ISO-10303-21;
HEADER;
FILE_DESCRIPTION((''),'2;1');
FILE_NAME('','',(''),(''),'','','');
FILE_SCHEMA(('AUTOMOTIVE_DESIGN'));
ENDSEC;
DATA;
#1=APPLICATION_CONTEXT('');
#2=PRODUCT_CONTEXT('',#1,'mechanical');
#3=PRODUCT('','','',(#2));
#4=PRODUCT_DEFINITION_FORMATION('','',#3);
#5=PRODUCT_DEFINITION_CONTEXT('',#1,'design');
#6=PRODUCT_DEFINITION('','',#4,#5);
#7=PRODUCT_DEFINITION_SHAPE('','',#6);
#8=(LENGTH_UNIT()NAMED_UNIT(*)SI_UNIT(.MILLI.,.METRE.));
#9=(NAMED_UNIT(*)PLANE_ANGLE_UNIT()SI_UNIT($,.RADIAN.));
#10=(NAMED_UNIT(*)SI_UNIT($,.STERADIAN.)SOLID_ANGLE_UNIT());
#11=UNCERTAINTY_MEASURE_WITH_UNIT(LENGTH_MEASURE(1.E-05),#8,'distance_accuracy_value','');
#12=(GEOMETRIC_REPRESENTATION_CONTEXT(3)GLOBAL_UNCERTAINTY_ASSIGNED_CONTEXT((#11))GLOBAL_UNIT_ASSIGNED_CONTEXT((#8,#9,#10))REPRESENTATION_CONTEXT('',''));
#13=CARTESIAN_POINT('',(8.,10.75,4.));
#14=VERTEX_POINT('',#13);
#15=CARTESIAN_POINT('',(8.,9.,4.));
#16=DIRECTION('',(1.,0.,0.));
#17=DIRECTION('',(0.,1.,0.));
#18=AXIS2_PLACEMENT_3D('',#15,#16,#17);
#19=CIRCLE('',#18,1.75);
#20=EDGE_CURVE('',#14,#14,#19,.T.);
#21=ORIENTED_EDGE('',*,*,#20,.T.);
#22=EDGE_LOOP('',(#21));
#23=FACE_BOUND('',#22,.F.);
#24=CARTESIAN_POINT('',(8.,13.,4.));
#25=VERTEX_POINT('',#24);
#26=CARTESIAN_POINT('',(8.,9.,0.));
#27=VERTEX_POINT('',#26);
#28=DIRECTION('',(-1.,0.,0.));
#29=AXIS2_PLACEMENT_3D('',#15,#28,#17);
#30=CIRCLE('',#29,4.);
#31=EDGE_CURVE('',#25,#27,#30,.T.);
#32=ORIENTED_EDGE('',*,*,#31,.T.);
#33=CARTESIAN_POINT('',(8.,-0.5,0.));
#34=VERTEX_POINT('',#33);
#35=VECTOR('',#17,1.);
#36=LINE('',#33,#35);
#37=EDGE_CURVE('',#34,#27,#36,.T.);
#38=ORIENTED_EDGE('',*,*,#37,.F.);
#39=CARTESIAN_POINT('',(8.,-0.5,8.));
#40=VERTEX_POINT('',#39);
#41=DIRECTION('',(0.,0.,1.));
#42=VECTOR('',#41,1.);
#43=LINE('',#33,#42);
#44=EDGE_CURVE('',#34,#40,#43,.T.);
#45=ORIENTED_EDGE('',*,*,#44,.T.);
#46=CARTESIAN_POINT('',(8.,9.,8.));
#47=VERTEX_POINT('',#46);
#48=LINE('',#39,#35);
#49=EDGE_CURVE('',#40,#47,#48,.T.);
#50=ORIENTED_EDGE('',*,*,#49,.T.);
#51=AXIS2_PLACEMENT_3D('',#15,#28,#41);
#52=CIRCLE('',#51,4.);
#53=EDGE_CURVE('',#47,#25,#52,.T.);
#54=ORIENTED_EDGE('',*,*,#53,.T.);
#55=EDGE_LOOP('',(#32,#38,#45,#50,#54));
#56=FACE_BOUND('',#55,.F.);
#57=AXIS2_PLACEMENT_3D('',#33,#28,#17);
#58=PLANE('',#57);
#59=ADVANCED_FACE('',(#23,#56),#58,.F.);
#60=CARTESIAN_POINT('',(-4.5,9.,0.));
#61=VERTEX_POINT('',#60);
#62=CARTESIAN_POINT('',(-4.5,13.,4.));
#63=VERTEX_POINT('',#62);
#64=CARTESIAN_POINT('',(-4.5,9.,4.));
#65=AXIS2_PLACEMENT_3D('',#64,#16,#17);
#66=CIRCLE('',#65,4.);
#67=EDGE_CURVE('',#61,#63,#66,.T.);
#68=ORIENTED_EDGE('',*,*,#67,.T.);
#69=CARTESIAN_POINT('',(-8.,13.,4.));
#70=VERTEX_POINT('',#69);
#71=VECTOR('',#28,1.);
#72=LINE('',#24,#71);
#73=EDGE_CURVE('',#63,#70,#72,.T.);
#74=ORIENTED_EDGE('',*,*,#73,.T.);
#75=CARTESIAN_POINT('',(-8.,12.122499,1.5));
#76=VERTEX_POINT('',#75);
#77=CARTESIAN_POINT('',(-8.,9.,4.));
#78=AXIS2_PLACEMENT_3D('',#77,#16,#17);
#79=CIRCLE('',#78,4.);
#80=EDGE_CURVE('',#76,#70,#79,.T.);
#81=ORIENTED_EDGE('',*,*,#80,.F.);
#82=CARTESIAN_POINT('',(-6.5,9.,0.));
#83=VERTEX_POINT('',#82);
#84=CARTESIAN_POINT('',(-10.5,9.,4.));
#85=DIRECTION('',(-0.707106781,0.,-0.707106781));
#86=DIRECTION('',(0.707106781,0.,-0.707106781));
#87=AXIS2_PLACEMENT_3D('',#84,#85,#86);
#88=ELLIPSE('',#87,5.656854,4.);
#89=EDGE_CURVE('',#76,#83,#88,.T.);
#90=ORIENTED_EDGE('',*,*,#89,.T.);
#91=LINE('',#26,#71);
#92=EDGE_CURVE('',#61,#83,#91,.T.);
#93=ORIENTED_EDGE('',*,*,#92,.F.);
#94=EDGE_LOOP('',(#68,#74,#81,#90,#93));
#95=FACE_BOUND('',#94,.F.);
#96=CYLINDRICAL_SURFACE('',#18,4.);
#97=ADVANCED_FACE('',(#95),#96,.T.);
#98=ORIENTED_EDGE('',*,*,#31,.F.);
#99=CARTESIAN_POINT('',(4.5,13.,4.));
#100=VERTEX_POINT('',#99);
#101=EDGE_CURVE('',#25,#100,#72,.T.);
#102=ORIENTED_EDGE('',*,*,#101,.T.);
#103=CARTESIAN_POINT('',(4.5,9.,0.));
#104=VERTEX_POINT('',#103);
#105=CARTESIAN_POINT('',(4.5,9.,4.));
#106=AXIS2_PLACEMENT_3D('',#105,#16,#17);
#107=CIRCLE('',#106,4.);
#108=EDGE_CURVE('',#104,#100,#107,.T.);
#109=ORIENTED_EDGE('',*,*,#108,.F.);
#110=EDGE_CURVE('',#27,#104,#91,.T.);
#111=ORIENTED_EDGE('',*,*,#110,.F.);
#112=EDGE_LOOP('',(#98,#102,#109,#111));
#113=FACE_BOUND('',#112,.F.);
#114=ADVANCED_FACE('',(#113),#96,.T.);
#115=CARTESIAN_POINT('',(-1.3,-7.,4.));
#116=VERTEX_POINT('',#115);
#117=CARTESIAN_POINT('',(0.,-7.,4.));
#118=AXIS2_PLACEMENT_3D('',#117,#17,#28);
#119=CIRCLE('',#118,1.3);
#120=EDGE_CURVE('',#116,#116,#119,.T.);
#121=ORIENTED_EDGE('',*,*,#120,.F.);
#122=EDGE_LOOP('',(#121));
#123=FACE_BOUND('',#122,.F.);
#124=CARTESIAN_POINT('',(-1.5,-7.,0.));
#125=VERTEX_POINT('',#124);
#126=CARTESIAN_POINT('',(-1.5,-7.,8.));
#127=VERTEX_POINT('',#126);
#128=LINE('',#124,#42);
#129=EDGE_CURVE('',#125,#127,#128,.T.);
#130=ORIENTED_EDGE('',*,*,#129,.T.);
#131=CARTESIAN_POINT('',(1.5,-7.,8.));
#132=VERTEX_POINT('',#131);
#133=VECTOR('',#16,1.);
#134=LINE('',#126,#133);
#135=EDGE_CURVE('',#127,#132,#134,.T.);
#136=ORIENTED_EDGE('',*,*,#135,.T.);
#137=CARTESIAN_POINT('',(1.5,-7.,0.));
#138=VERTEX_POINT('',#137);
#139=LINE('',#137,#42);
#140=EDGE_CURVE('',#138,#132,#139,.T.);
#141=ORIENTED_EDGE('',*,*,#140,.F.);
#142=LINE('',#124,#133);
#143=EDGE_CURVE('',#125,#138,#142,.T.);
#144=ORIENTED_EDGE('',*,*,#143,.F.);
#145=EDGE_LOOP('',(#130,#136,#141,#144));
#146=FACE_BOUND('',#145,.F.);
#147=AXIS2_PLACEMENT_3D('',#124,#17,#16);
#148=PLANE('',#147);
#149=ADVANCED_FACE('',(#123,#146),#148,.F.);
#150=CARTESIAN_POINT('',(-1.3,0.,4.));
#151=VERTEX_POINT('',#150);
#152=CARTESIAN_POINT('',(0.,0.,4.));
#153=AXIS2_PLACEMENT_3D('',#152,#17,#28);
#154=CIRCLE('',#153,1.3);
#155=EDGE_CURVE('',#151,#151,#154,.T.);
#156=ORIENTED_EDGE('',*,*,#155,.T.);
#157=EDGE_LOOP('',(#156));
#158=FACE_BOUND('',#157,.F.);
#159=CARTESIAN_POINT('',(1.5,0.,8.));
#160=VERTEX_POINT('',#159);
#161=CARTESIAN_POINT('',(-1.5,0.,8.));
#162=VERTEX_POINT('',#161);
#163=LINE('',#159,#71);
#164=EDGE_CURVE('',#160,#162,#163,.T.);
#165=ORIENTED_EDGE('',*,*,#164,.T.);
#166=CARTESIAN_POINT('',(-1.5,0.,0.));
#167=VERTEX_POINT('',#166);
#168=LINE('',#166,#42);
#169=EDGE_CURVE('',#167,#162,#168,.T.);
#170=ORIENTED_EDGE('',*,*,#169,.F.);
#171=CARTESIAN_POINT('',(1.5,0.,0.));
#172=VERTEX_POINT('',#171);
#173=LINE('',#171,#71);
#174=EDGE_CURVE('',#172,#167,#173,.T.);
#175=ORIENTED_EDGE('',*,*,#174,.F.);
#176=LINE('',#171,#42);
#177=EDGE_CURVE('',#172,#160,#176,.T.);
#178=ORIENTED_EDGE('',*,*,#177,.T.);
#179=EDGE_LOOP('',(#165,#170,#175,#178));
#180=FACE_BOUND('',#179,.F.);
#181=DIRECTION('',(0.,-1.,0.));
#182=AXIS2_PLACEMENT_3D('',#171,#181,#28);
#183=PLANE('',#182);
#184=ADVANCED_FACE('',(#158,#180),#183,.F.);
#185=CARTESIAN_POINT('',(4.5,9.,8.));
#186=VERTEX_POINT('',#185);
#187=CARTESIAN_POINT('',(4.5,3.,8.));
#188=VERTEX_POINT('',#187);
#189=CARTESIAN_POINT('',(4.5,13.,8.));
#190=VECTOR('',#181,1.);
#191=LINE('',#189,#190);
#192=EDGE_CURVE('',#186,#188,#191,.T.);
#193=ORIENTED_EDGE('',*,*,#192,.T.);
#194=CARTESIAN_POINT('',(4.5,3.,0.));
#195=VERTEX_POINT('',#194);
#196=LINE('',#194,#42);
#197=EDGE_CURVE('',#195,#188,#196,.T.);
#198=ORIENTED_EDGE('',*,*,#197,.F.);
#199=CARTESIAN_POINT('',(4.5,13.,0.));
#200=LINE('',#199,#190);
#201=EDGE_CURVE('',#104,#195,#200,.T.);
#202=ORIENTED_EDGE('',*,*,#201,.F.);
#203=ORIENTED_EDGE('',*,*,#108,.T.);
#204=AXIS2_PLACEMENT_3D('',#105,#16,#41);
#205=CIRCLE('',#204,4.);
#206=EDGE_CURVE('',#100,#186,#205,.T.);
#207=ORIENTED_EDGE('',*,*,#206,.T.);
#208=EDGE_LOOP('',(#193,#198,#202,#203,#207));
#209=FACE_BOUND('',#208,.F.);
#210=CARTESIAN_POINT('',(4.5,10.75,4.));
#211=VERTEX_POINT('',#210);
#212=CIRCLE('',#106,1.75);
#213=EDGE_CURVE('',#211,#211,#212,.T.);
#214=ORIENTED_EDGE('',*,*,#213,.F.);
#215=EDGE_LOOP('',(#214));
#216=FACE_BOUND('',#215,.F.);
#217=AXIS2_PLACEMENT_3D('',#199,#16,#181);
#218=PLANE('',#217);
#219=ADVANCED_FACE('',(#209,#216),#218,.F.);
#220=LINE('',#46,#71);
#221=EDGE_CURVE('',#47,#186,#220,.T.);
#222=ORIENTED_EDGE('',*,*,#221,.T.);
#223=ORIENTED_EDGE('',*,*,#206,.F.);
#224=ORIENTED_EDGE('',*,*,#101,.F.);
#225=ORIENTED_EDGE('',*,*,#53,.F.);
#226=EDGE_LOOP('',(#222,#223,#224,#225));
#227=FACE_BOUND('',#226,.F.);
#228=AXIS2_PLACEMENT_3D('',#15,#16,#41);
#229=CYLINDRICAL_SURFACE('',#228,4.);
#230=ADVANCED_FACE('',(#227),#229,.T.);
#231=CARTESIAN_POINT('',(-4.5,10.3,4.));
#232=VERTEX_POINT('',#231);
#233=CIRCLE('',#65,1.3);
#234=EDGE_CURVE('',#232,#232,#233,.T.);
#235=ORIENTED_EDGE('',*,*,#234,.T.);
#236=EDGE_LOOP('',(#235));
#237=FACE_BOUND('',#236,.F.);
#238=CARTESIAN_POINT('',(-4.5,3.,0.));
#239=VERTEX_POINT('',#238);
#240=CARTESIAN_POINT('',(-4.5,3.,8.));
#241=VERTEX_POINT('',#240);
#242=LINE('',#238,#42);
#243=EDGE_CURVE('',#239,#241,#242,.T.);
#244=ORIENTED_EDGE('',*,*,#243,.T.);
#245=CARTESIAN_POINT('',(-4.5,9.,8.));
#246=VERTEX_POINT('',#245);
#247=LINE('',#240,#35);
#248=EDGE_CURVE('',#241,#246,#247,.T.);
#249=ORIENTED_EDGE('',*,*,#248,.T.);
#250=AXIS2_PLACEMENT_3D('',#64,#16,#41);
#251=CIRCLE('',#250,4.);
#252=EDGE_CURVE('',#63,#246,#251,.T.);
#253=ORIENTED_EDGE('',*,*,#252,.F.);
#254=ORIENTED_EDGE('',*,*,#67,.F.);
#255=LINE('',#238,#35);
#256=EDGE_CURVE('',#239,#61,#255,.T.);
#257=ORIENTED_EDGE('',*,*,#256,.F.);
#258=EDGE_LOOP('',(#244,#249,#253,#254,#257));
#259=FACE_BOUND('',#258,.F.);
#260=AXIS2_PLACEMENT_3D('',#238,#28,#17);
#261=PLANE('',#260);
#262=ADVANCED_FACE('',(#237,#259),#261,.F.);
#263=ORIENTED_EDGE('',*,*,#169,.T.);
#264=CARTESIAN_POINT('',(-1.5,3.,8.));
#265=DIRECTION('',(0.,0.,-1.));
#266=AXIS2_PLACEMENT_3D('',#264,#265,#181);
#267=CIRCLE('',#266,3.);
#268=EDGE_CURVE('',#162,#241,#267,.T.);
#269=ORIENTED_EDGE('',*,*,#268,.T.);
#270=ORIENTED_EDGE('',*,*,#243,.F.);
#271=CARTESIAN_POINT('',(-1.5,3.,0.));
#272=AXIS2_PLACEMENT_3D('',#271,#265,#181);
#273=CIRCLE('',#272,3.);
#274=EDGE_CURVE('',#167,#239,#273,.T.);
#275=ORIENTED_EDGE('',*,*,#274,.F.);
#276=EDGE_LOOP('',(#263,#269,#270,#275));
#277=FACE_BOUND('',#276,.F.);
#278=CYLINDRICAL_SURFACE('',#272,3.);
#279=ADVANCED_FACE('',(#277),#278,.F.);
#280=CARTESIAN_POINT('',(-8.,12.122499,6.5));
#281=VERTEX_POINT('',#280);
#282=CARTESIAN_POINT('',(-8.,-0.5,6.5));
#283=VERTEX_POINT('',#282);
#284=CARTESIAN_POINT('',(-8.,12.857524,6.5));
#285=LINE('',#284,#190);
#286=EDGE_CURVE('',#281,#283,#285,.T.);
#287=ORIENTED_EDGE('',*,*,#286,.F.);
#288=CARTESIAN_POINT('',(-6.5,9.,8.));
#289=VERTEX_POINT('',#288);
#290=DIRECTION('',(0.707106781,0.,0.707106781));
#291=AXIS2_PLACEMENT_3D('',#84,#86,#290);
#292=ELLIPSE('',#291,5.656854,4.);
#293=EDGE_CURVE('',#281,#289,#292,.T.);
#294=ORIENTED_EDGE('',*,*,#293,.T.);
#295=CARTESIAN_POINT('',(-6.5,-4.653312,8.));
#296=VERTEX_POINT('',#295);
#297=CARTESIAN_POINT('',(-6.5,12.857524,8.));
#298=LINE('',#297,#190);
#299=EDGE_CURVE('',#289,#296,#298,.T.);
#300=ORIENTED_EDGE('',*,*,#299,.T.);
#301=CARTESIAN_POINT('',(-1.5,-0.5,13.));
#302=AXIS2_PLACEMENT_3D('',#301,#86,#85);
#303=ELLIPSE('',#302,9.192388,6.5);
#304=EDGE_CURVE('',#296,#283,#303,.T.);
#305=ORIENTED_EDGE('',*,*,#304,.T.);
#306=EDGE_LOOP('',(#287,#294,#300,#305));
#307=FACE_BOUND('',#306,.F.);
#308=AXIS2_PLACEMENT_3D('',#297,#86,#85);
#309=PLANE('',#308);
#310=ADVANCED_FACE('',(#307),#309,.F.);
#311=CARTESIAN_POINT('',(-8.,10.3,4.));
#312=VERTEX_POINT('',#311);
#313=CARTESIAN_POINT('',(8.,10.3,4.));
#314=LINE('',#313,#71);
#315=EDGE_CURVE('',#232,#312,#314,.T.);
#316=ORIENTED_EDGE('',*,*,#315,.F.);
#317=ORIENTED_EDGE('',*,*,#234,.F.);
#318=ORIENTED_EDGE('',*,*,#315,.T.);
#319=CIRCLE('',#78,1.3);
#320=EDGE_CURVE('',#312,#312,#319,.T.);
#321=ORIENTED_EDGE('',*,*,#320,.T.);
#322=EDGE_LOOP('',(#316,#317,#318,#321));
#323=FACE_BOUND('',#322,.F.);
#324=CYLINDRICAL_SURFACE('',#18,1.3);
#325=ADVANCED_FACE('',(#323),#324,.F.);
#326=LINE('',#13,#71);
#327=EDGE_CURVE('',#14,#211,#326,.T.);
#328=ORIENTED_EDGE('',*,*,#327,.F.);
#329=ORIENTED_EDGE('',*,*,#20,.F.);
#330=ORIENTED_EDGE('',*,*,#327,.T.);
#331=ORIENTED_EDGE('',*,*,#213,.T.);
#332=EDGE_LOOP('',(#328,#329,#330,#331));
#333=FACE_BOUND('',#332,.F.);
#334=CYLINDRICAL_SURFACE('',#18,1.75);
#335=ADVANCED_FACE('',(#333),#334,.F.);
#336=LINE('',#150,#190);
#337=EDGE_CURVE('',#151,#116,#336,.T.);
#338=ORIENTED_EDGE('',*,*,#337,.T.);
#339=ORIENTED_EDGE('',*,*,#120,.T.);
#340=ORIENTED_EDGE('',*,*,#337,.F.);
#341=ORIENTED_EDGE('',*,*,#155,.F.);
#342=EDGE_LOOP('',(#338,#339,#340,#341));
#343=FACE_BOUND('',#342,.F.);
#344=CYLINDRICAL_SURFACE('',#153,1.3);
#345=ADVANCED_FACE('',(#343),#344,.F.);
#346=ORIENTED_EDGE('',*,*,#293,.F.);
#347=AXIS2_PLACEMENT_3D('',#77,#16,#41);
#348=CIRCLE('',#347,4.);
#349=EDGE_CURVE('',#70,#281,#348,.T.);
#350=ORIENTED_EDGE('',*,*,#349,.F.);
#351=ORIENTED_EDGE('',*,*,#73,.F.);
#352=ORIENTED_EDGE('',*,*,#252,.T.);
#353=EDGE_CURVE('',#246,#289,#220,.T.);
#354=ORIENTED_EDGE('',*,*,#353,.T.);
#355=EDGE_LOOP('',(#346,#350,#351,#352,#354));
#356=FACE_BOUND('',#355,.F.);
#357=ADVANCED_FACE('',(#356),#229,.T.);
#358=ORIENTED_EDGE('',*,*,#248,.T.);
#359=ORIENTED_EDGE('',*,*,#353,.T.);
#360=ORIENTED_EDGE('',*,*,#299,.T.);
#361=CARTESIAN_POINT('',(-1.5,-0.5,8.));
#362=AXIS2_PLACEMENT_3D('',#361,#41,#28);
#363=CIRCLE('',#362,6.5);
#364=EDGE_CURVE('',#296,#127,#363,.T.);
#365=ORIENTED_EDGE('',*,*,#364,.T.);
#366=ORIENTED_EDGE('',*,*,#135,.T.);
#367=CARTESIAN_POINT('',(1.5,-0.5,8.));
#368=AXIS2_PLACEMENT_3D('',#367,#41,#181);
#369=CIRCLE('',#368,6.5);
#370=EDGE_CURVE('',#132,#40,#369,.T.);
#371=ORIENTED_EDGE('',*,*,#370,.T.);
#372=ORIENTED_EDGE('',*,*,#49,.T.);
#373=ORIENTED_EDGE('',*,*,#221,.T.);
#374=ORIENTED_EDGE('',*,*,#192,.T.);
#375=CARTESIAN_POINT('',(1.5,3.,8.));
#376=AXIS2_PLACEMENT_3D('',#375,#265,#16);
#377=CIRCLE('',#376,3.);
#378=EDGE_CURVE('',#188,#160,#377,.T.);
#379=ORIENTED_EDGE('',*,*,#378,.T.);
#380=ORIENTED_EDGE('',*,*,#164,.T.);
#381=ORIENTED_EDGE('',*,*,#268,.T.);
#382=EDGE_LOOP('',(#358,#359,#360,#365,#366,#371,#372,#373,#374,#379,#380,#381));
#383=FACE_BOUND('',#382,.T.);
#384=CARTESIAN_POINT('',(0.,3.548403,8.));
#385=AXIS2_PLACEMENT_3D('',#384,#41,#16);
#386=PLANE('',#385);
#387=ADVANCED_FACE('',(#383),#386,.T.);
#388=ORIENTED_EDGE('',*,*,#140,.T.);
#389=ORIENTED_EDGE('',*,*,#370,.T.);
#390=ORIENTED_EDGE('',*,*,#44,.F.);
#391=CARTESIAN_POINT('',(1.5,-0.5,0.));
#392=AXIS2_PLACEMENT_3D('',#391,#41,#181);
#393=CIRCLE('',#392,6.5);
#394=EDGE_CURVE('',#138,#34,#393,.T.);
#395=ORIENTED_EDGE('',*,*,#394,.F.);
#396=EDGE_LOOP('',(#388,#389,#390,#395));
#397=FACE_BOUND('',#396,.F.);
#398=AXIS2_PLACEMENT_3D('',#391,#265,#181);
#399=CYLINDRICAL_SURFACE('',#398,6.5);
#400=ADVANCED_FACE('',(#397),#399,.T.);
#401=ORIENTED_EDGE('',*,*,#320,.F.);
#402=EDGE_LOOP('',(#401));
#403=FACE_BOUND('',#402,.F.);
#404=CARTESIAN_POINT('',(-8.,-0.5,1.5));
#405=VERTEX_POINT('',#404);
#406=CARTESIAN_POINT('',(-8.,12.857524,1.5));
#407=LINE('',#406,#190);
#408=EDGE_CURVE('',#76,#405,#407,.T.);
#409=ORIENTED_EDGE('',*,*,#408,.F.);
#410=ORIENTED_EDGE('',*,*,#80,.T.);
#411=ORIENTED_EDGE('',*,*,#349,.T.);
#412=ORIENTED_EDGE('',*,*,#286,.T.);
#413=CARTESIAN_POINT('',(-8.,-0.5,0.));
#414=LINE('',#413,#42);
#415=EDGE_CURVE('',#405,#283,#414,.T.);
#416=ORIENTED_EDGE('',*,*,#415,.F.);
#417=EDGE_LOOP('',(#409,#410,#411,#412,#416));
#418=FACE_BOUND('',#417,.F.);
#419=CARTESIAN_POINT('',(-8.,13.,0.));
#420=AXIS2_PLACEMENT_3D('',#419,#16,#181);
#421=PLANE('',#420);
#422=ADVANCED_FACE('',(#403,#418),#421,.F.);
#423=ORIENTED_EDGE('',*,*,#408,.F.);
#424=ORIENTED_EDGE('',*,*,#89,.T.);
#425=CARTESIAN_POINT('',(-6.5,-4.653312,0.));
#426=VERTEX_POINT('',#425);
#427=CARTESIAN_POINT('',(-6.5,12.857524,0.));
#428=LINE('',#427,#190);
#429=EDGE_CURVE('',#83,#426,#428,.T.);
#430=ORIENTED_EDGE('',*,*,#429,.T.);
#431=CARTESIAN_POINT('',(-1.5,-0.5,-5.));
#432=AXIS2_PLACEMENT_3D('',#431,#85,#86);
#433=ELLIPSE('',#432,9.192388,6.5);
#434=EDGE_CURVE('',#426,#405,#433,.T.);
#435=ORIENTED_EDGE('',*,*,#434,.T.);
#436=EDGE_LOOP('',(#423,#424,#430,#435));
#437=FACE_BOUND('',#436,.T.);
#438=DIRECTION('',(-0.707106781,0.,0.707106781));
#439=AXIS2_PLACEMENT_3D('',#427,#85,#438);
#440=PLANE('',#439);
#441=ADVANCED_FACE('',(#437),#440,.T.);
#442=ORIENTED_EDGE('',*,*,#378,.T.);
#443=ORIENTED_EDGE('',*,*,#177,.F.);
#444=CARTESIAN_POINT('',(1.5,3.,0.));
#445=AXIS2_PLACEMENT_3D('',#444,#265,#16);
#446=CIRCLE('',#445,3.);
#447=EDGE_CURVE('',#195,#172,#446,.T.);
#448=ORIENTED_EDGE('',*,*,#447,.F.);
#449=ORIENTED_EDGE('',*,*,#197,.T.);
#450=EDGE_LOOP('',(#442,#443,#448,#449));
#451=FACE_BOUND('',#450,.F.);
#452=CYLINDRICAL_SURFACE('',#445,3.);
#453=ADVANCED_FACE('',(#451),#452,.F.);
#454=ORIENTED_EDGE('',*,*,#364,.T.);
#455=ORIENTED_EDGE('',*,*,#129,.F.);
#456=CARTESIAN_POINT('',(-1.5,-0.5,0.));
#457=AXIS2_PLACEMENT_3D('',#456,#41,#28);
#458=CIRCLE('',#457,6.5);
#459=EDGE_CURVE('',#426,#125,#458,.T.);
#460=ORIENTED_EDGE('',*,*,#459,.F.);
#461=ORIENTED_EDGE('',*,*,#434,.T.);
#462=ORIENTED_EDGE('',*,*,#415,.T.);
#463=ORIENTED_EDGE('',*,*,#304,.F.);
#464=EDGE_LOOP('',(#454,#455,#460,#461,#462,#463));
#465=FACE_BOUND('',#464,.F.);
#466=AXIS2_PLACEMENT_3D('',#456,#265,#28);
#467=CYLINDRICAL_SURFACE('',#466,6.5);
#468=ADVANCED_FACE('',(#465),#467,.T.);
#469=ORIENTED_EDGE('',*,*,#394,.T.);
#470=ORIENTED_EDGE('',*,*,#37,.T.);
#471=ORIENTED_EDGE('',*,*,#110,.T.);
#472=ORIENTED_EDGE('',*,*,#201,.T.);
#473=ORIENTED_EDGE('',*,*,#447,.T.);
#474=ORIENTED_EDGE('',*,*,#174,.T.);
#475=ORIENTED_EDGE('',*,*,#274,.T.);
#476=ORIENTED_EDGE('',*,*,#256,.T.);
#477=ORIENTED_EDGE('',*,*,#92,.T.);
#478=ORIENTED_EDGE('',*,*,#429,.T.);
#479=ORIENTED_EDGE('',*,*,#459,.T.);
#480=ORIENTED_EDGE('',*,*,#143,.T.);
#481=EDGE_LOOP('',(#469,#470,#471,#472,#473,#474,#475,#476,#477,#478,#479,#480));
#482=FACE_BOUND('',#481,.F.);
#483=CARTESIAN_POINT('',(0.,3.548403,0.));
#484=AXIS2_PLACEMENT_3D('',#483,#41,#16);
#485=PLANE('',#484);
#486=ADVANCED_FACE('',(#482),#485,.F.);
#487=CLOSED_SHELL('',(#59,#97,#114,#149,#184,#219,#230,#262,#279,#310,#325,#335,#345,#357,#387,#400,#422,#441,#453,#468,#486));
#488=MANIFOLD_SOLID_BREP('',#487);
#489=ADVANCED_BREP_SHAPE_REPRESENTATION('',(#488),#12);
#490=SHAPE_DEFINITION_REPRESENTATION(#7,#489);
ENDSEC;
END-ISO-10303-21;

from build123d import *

# Parameters (mm, degrees)
F1_DEPTH    = 8
F3_DEPTH    = 16.001
F2_R        = 1.3
F4_DEPTH    = 16.001
F2_R_2      = 1.75
F5_DEPTH    = 3.5
F6_R        = 1.3
F7_DEPTH    = 7
F8_T1_DEPTH = 19.9153161013


# Not quite as in the source:
# - a fillet or chamfer that OpenCascade refuses, or shapes differently, is made with other operations: its cross-section is extruded or revolved along the edge and cut away or added


with BuildPart() as f1:
    # F0 (on Top) → F1 (new body)
    with BuildSketch(Plane.XY):
        with BuildLine():
            Line((-4.5, 3), (-4.5, 13))
            Line((-4.5, 13), (-8, 13))
            Line((-8, 13), (-8, -0.5))
            ThreePointArc((-8, -0.5), (-6.0961940777, -5.0961940777), (-1.5, -7))
            Line((-1.5, -7), (1.5, -7))
            ThreePointArc((1.5, -7), (6.0961940777, -5.0961940777), (8, -0.5))
            Line((8, -0.5), (8, 13))
            Line((8, 13), (4.5, 13))
            Line((4.5, 13), (4.5, 3))
            ThreePointArc((4.5, 3), (3.6213203436, 0.8786796564), (1.5, 0))
            Line((1.5, 0), (-1.5, 0))
            ThreePointArc((-1.5, 0), (-3.6213203436, 0.8786796564), (-4.5, 3))
        make_face()
    extrude(amount=F1_DEPTH)

    # F2 (on face) → F3 (cut, through all)
    with BuildSketch(Plane.YZ.offset(8)):
        with BuildLine():
            ThreePointArc((13, 4), (11.8284271247, 1.1715728753), (9, 0))
            Line((9, 0), (13, 0))
            Line((13, 0), (13, 4))
        make_face()
        with BuildLine():
            ThreePointArc((9, 8), (11.8284271247, 6.8284271247), (13, 4))
            Line((13, 4), (13, 8))
            Line((13, 8), (9, 8))
        make_face()
    extrude(amount=-F3_DEPTH, mode=Mode.SUBTRACT)

    # F2 (on face) → F4 (cut, through all)
    with BuildSketch(Plane.YZ.offset(8)):
        with Locations((9, 4)):
            Circle(F2_R)
    extrude(amount=-F4_DEPTH, mode=Mode.SUBTRACT)

    # F2 (on face) → F5 (cut, through all)
    with BuildSketch(Plane.YZ.offset(8)):
        with Locations((9, 4)):
            Circle(F2_R_2)
        with Locations((9, 4)):
            Circle(F2_R, mode=Mode.SUBTRACT)
    extrude(amount=-F5_DEPTH, mode=Mode.SUBTRACT)

    # F6 (on face) → F7 (cut, through all)
    with BuildSketch(Plane(origin=(0, 0, 0), x_dir=(-1, 0, 0), z_dir=(0, 1, 0))):
        with Locations((0, 4)):
            Circle(F6_R)
    extrude(amount=-F7_DEPTH, mode=Mode.SUBTRACT)

    # F8: chamfer of 1.5 on 2 edges, made by hand

    # F8_s2 → F8_t1 (cut)
    with BuildSketch(Plane.XZ.offset(-12.8575244819)):
        Polygon((-6.5, 0), (-8, 1.5), (-8, 0), align=None)
        Polygon((-6.5, 8), (-8, 6.5), (-8, 8), align=None)
    extrude(amount=F8_T1_DEPTH, mode=Mode.SUBTRACT)


solid = f1.part
